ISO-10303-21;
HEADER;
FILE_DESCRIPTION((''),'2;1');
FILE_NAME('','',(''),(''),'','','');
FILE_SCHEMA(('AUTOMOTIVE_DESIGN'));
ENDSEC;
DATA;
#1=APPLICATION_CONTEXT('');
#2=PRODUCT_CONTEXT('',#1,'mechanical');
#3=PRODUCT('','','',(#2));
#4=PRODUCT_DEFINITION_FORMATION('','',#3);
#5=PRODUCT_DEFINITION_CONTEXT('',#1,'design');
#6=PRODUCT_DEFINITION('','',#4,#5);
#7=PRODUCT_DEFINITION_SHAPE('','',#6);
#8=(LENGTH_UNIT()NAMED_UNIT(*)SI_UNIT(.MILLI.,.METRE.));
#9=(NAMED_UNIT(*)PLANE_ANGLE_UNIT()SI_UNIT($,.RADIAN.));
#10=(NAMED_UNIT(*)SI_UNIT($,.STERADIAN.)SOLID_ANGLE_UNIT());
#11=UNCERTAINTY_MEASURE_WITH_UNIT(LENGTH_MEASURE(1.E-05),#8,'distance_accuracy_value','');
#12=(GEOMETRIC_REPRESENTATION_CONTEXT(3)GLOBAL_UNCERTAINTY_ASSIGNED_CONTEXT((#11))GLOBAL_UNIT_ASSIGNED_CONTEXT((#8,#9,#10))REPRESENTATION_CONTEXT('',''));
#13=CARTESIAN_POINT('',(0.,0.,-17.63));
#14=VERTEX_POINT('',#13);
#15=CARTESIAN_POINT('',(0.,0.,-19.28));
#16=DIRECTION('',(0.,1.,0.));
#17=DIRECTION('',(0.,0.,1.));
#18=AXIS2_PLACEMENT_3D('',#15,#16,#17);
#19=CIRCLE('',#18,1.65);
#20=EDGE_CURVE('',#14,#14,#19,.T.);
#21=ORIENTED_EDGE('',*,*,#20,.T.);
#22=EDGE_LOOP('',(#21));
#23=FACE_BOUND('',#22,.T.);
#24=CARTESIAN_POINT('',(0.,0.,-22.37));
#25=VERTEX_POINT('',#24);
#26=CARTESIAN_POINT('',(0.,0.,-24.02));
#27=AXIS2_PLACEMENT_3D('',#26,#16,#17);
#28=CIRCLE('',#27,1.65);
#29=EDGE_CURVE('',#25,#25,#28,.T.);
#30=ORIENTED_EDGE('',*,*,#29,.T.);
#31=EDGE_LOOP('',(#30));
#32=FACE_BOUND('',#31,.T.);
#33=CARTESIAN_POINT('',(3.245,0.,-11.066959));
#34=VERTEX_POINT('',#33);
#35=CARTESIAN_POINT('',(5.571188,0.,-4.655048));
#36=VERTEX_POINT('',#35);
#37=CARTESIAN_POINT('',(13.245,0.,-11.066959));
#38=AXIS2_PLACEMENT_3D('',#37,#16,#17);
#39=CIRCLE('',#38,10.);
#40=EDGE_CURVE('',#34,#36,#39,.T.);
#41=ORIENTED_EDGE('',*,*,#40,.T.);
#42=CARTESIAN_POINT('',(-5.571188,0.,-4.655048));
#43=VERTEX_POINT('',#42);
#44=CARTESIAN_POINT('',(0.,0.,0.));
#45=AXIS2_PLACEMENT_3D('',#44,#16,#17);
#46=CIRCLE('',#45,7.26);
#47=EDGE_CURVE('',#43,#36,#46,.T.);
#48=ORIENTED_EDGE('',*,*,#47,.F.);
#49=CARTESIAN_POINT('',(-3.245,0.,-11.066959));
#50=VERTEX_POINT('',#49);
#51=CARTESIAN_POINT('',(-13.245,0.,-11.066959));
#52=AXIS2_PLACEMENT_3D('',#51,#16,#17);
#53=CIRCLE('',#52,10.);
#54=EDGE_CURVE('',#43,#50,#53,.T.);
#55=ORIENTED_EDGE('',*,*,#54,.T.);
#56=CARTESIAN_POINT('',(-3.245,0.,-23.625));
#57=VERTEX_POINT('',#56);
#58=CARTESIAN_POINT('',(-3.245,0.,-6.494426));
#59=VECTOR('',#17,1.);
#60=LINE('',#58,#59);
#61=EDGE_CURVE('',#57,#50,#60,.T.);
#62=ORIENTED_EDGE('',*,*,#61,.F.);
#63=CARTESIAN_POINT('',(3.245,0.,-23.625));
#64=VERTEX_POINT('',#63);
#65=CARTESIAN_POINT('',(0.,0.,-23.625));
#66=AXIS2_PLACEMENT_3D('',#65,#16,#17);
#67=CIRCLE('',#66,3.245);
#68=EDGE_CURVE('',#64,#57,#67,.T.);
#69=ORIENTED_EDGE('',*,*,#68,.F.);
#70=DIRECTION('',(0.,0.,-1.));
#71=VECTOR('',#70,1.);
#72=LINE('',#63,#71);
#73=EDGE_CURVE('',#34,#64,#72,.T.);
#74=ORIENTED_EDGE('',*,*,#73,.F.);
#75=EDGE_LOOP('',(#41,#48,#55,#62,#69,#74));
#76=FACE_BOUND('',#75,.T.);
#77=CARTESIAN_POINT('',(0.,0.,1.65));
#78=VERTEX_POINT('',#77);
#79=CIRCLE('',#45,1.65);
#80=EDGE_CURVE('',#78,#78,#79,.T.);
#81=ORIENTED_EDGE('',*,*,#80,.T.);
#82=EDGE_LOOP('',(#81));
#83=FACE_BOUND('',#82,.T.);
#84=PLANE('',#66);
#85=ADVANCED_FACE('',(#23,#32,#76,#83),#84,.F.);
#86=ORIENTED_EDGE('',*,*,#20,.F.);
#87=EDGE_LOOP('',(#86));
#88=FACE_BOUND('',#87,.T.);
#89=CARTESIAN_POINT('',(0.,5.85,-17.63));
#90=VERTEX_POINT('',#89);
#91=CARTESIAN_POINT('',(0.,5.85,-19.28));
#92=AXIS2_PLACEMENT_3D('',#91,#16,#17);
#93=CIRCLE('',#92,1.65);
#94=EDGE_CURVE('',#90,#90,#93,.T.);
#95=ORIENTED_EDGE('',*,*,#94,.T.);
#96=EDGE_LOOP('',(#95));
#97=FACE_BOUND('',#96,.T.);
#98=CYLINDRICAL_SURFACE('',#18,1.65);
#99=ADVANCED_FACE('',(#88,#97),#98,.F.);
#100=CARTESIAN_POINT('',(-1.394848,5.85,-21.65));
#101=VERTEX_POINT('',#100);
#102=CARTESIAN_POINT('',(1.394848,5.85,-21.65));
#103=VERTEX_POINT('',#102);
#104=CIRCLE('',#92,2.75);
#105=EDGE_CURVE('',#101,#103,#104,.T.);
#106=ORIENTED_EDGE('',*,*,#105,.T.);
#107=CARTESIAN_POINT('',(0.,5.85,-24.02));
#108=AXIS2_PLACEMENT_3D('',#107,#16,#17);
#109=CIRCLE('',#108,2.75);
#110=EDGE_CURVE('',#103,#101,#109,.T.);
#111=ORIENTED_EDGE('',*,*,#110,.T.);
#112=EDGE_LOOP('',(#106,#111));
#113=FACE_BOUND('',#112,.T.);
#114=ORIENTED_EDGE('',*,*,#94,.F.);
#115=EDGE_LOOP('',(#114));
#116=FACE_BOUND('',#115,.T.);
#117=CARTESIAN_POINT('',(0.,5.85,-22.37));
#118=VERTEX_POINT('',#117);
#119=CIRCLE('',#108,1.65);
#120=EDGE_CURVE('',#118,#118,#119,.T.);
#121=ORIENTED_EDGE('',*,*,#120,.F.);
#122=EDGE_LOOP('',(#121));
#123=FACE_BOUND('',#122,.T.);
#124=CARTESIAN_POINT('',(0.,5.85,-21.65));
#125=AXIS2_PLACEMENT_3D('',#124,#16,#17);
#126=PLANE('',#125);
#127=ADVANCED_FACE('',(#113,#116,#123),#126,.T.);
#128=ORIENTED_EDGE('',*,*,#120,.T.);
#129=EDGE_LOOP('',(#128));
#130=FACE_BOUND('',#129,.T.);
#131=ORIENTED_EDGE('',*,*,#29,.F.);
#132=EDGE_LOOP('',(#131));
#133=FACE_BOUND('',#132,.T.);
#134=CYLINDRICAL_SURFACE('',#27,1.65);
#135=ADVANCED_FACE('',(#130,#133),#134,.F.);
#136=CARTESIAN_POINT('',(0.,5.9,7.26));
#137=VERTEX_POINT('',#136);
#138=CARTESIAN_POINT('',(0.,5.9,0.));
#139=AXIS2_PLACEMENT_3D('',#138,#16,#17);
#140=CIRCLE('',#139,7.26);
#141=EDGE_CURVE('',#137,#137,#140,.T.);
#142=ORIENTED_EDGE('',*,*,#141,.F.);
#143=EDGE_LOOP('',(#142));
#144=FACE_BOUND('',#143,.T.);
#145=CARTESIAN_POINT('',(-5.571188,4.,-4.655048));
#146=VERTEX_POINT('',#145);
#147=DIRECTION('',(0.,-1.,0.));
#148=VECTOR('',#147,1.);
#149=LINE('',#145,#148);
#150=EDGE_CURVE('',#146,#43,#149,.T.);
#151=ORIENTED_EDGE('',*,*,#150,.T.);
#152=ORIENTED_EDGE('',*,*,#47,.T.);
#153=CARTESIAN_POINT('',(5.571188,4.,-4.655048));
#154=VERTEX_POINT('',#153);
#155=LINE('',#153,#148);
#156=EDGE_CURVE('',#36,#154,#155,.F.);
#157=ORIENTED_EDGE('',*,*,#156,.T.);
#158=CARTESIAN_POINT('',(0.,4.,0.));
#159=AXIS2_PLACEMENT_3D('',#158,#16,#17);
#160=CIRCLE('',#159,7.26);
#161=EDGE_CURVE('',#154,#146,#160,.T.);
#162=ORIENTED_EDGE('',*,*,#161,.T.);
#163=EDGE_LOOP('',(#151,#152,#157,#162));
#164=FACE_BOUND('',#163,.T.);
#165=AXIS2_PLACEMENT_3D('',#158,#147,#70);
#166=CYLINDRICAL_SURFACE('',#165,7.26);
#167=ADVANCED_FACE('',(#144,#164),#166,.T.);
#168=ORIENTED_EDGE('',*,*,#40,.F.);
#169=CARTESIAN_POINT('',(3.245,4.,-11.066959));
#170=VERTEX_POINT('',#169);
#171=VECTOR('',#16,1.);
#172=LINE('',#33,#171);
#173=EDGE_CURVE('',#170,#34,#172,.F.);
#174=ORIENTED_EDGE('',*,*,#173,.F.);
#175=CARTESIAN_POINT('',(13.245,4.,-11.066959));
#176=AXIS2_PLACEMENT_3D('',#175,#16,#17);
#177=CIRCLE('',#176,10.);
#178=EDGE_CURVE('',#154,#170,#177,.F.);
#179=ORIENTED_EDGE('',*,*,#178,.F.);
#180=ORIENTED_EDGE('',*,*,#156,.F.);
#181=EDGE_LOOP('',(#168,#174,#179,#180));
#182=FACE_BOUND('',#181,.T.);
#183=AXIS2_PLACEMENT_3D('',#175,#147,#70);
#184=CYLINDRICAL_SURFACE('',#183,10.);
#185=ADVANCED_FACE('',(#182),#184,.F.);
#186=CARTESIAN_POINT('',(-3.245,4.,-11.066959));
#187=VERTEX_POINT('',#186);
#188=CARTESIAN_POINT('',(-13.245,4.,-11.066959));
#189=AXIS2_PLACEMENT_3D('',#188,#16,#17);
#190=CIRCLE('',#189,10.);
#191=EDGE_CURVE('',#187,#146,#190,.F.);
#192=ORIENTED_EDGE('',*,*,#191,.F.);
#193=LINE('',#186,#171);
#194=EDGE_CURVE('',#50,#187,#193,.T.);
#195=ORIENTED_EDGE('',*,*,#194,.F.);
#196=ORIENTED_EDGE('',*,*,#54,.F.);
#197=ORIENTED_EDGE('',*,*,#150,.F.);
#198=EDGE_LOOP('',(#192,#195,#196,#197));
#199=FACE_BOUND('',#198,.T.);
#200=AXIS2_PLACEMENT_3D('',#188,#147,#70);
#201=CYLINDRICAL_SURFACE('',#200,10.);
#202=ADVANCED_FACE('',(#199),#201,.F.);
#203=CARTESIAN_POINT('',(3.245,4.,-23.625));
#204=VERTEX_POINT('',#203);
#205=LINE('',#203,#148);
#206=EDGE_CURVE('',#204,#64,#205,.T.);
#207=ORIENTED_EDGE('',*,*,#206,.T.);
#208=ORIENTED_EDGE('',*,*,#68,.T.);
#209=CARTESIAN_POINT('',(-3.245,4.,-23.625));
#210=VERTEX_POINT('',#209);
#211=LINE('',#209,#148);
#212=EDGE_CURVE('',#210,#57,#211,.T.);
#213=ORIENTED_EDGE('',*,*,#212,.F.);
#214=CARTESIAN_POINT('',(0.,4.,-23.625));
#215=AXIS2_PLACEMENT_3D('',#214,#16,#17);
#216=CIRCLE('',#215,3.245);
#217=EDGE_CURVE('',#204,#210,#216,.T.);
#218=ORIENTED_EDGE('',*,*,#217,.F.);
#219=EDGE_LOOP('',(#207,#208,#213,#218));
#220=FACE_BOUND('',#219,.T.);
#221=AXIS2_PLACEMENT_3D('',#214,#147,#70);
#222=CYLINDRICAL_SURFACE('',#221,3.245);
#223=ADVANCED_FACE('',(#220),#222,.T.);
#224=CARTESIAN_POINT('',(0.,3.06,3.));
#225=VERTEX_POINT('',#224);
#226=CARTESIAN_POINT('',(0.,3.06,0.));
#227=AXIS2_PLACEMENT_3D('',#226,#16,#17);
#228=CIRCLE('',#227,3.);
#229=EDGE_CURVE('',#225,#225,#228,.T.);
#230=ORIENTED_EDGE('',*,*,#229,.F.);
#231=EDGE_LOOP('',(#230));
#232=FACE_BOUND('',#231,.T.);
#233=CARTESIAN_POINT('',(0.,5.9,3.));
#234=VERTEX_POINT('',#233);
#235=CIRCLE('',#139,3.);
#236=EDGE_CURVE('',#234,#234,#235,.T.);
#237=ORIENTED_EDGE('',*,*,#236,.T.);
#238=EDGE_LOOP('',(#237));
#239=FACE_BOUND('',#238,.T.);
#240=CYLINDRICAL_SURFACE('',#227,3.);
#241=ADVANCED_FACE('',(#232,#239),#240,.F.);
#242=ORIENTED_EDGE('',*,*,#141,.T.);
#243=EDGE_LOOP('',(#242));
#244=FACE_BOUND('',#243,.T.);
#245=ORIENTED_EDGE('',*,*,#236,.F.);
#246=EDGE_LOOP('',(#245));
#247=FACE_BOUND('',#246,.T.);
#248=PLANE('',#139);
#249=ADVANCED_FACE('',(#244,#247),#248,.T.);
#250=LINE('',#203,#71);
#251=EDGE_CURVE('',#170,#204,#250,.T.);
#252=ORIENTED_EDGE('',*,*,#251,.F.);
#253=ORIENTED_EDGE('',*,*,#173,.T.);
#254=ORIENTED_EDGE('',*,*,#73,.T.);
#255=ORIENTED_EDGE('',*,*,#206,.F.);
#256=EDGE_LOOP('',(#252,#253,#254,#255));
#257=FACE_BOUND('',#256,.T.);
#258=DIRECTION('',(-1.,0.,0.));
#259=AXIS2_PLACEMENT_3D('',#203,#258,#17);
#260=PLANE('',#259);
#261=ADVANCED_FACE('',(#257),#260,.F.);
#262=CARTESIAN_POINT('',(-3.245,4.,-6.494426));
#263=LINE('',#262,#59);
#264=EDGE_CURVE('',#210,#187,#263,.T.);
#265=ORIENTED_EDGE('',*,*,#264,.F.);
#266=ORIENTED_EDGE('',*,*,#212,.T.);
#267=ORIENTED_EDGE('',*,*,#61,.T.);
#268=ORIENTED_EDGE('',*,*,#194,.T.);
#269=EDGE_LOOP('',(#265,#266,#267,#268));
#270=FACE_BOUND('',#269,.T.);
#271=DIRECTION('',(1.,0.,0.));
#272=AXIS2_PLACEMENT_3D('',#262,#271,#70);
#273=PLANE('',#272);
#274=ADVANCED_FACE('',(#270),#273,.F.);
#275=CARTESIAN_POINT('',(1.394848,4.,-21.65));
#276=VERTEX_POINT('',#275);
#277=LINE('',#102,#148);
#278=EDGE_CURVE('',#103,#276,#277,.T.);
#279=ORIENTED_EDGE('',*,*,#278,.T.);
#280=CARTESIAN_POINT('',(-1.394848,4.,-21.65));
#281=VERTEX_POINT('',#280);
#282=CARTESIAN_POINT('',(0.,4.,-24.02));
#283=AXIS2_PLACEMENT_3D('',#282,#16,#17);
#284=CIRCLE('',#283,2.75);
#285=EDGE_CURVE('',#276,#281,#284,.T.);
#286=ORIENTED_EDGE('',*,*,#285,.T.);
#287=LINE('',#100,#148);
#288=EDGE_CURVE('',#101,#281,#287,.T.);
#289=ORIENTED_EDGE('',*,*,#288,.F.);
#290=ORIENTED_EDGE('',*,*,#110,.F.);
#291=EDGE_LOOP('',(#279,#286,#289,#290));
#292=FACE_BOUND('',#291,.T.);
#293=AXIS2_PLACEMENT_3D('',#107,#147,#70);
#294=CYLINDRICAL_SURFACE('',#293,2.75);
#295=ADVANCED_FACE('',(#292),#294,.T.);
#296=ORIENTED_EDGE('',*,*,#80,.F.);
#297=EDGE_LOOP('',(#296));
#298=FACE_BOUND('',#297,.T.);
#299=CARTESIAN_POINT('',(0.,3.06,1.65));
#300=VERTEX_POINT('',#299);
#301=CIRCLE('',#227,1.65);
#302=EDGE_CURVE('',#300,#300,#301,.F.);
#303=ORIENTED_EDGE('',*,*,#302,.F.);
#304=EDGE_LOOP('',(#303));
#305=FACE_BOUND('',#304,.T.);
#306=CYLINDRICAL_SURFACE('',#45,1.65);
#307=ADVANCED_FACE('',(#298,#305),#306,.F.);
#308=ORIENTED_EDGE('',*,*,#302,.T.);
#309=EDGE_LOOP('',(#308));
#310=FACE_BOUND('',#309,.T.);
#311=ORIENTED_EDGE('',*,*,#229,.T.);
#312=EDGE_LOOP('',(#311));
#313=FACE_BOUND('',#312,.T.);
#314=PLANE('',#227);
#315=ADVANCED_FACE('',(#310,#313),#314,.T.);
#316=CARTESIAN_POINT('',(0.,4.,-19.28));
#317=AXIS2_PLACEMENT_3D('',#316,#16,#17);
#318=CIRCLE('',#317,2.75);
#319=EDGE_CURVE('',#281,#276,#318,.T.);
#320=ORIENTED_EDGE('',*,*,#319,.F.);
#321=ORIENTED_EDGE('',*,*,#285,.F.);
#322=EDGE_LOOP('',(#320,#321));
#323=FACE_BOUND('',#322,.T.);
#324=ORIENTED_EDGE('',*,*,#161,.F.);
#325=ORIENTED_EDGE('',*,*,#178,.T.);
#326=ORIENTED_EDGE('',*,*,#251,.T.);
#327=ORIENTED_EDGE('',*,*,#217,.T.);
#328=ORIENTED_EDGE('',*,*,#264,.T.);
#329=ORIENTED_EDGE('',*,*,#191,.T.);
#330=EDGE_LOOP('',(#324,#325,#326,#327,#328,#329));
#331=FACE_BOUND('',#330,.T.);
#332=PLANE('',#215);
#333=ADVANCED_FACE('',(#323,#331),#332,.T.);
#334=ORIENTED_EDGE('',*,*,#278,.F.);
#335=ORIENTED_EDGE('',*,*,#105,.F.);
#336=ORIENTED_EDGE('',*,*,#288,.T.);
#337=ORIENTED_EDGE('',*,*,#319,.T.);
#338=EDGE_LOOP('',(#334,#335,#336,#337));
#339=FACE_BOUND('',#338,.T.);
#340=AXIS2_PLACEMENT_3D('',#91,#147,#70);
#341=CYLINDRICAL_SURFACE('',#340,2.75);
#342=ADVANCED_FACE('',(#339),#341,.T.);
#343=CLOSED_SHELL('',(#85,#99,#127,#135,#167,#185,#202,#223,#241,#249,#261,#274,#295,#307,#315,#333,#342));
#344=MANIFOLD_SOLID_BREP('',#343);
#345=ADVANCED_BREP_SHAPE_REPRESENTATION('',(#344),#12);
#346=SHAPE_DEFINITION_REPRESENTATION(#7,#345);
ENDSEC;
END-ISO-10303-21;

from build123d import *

# Parameters (mm, degrees)
BOSS_EXTRU_1_DEPTH           = 4
ESQUISSE3_R                  = 7.26
BOSS_EXTRU_2_DEPTH           = 1.9
ENL_V_MAT_EXTRU_1_DEPTH      = 29.119468345
ENL_V_MAT_EXTRU_1_DEPTH_BACK = 29.119468345
ESQUISSE2_R                  = 1.65
BOSS_EXTRU_3_START           = 1.85
ESQUISSE4_R                  = 1.65
BOSS_EXTRU_3_DEPTH           = 1.85
CONG_1_R                     = 10
ESQUISSE5_R                  = 3
ENL_V_MAT_EXTRU_2_DEPTH      = 2.84


with BuildPart() as part:
    # Esquisse1 → Boss.-Extru.1 (new body)
    with BuildSketch(Plane(origin=(0, 0, 0), x_dir=(1, 0, 0), z_dir=(0, 1, 0))):
        with BuildLine():
            Line((-3.245, 6.494426457), (-3.245, 23.625))
            ThreePointArc((-3.245, 23.625), (0, 26.87), (3.245, 23.625))
            Line((3.245, 23.625), (3.245, 6.494426457))
            ThreePointArc((3.245, 6.494426457), (0, -7.26), (-3.245, 6.494426457))
        make_face()
    extrude(amount=BOSS_EXTRU_1_DEPTH)

    # Esquisse3 → Boss.-Extru.2 (add)
    with BuildSketch(Plane(origin=(0, 4, 0), x_dir=(1, 0, 0), z_dir=(0, 1, 0))):
        with Locations(Location((0, 0, 0), (0, 0, 63.450571564))):
            Circle(ESQUISSE3_R)
    extrude(amount=BOSS_EXTRU_2_DEPTH)

    # Esquisse2 → Enlèv. mat.-Extru.1 (cut, two sides: drawn at the far end of the back side and taken through both)
    with BuildSketch(Plane(origin=(0, 4, 0), x_dir=(1, 0, 0), z_dir=(0, 1, 0)).offset(-ENL_V_MAT_EXTRU_1_DEPTH_BACK)):
        with Locations(Location((0, 0, 0), (0, 0, 270))):
            Circle(ESQUISSE2_R)
        with Locations(Location((0, 19.28, 0), (0, 0, 270))):
            Circle(ESQUISSE2_R)
        with Locations(Location((0, 24.02, 0), (0, 0, 270))):
            Circle(ESQUISSE2_R)
    extrude(amount=ENL_V_MAT_EXTRU_1_DEPTH + ENL_V_MAT_EXTRU_1_DEPTH_BACK, mode=Mode.SUBTRACT)

    # Esquisse4 → Boss.-Extru.3 (add)
    with BuildSketch(Plane(origin=(0, 4, 0), x_dir=(1, 0, 0), z_dir=(0, 1, 0)).offset(BOSS_EXTRU_3_START)):
        with BuildLine():
            ThreePointArc((1.394847662, 21.65), (0, 26.77), (-1.394847662, 21.65))
            ThreePointArc((-1.394847662, 21.65), (0, 16.53), (1.394847662, 21.65))
        make_face()
        with Locations(Location((0, 24.02, 0), (0, 0, 270))):
            Circle(ESQUISSE4_R, mode=Mode.SUBTRACT)
        with Locations(Location((0, 19.28, 0), (0, 0, 270))):
            Circle(ESQUISSE4_R, mode=Mode.SUBTRACT)
    extrude(amount=-BOSS_EXTRU_3_DEPTH)

    # Congé1
    # the kernel refuses this fillet: 10 mm, written as the material it adds along each edge
    with BuildSketch(Plane(origin=(3.245, 0, -6.494426457), x_dir=(0, 0, -1), z_dir=(0, 1, 0))) as cong_1_piece_1:
        with BuildLine():
            CenterArc((4.572532249, -10), CONG_1_R, 90, 39.880695656)
            ThreePointArc((-1.839378936, -2.326187717), (-0.799649919, -1.258012346), (0, 0))
            Line((0, 0), (4.572532249, 0))
        make_face()
    extrude(amount=4)
    with BuildSketch(Plane(origin=(-3.245, 0, -6.494426457), x_dir=(0, 0, -1), z_dir=(0, 1, 0))) as cong_1_piece_2:
        with BuildLine():
            CenterArc((4.572532249, 10), CONG_1_R, 230.119304344, 39.880695656)
            ThreePointArc((-1.839378936, 2.326187717), (-0.799649919, 1.258012346), (0, 0))
            Line((0, 0), (4.572532249, 0))
        make_face()
    extrude(amount=4)

    # Esquisse5 → Enlèv. mat.-Extru.2 (cut)
    with BuildSketch(Plane(origin=(0, 5.9, 0), x_dir=(1, 0, 0), z_dir=(0, 1, 0))):
        with Locations(Location((0, 0, 0), (0, 0, 270))):
            Circle(ESQUISSE5_R)
    extrude(amount=-ENL_V_MAT_EXTRU_2_DEPTH, mode=Mode.SUBTRACT)


solid = part.part
